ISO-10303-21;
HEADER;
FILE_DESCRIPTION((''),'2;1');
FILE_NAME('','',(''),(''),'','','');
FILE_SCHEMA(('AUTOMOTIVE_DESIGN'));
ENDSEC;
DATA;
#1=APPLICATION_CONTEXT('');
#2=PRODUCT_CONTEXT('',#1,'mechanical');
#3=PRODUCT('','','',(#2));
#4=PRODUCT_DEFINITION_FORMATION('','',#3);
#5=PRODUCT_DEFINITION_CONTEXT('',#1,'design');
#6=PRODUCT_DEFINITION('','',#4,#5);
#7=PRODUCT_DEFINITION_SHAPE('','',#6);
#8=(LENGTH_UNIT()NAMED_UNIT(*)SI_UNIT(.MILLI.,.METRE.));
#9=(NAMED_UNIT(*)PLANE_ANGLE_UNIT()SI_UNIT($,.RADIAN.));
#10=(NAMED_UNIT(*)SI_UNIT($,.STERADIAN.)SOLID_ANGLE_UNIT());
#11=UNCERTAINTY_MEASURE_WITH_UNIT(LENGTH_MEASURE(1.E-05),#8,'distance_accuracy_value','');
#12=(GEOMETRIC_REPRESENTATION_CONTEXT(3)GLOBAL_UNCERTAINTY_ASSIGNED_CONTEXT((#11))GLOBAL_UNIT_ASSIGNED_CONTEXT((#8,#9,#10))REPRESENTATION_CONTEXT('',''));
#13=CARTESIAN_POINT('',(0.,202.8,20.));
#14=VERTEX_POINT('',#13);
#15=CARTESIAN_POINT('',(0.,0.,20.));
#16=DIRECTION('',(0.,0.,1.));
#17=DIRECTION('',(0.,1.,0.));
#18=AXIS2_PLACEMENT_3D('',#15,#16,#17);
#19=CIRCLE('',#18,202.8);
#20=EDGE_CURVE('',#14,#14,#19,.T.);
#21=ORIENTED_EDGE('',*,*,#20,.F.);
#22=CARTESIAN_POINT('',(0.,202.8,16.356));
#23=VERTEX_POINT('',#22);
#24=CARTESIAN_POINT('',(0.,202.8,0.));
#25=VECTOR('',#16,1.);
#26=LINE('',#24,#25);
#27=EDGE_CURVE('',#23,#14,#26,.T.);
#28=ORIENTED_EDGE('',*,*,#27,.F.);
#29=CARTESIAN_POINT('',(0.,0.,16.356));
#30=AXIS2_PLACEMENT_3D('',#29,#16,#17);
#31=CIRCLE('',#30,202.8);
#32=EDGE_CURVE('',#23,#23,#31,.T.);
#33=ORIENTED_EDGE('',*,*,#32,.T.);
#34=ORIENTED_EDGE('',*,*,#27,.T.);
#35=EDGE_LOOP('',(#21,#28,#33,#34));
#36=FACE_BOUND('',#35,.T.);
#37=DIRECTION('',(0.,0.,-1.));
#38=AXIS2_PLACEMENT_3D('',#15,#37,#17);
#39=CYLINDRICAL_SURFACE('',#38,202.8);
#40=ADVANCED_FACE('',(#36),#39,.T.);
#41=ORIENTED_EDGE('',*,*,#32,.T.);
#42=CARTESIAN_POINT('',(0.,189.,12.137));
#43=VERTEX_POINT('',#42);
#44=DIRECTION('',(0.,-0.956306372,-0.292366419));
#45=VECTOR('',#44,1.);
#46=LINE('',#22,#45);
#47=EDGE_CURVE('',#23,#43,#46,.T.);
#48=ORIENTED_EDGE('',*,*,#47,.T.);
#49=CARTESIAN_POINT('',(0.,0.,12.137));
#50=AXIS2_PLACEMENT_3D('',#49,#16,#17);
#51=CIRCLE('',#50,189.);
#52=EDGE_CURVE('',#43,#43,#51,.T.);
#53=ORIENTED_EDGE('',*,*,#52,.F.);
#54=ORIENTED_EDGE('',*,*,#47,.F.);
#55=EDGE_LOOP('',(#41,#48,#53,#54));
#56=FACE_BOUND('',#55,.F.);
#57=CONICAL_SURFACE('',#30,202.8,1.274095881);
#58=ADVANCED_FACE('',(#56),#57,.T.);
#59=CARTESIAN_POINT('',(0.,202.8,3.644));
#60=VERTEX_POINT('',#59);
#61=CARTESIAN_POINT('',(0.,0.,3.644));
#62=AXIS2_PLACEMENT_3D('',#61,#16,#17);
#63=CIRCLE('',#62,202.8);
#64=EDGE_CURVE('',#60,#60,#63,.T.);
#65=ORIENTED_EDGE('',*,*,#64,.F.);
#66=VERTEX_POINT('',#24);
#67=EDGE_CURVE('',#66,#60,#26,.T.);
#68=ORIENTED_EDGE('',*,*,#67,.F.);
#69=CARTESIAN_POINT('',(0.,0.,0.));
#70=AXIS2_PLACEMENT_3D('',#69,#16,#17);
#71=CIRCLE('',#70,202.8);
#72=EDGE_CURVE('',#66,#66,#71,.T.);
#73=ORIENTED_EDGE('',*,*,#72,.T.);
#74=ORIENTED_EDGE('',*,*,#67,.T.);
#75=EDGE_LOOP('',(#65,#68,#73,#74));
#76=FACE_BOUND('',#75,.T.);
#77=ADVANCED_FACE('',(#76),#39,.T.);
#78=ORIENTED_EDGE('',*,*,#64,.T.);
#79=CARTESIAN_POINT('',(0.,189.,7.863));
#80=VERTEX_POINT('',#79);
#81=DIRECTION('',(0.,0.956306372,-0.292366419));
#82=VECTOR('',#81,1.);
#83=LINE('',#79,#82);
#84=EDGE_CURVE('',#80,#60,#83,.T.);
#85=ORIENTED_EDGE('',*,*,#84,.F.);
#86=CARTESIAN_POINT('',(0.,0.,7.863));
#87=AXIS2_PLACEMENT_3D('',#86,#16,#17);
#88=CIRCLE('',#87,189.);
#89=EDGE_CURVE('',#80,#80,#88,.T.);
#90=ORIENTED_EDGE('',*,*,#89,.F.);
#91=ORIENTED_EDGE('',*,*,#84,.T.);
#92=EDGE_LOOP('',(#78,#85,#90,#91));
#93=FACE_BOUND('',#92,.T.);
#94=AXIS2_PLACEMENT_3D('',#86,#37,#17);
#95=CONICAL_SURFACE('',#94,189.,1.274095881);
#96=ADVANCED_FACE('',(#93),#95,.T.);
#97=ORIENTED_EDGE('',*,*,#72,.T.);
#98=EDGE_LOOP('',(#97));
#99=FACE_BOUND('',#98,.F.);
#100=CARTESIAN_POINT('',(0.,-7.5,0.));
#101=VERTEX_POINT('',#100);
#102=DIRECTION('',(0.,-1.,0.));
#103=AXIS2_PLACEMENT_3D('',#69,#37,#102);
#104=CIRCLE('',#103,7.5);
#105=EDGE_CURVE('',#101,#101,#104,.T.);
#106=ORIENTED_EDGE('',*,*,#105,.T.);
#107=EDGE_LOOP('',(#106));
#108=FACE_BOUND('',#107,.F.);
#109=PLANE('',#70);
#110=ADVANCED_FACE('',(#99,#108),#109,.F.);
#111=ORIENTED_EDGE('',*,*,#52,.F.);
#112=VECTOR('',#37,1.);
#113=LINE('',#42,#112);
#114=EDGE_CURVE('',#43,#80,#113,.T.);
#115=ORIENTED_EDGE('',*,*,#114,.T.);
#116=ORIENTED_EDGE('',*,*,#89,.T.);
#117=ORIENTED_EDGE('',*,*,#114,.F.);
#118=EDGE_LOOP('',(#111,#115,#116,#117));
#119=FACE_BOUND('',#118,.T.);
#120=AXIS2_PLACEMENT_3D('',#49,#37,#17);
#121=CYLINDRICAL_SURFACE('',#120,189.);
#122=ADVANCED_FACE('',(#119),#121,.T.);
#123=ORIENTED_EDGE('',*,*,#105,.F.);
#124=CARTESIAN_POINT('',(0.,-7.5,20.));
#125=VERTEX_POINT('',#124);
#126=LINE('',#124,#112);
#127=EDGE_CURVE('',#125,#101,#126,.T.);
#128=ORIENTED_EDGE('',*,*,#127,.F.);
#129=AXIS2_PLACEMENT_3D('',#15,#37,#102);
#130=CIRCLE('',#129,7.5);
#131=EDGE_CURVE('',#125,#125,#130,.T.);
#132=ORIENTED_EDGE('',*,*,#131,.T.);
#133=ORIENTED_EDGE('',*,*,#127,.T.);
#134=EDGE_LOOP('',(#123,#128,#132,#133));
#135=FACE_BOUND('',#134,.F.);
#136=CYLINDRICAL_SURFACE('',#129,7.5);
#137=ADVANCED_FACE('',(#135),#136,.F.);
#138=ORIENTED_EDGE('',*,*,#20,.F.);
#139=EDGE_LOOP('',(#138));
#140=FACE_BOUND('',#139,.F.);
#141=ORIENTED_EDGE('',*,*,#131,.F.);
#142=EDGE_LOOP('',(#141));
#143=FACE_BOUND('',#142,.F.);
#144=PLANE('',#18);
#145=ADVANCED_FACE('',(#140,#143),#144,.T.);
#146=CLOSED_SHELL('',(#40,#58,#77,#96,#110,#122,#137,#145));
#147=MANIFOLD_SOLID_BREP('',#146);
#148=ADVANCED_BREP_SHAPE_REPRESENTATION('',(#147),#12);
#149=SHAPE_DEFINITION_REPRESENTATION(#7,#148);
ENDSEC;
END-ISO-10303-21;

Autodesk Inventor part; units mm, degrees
ref_plane "YZ Plane" through (0, 0, 0) normal (1, 0, 0) x (0, 1, 0)
ref_plane "XZ Plane" through (0, 0, 0) normal (0, 1, 0) x (-1, 0, 0)
sketch "Boceto principal" plane through (0, 0, 0) normal (1, 0, 0) x (0, 1, 0)
  line L0 (0, 20) -> (202.8, 20)
  line L1 (202.8, 20) -> (202.8, 16.356)
  line L2 (202.8, 16.356) -> (189, 12.137)
  line L3 (189, 12.137) -> (189, 7.863)
  line L4 (189, 7.863) -> (202.8, 3.644)
  line L5 (202.8, 3.644) -> (202.8, 0)
  line L6 (202.8, 0) -> (0, 0)
  line L7 (200, 15.5) -> (200, 4.5) construction
  line L8 (189, 10) -> (200, 10) construction
  line L9 (202.8, 16.356) -> (202.8, 3.644)
  line L10 (0, -4) -> (0, 24) projected
  line L11 (0, 0) -> (0, 20)
  dimension "d0" = 11
  dimension "d1" = 34
  dimension "d2" = 2.8
  dimension "d6" = 20
  dimension "d21" = 400
  dimension "d25" = 13.8
  dimension "d27" = 10
ref_plane "Plano de correa" through (0, 189, 10) normal (0, 0, 1) x (1, 0, 0)
revolve "Cuerpo" add sketch "Boceto principal" angle 360 about axis through (0, 0, -10) along (0, 0, 1)
revolve "Para ranuras" cut sketch "Boceto principal" angle 360 about axis through (0, 0, -10) along (0, 0, 1) contours L9 L4 L3 L2
fillet "Empalme externo" [suppressed]
fillet "Empalme interno" [suppressed]
pattern_of_one "Patrón para ranuras"
sketch "Boceto2" plane through (0, 0, 20) normal (0, 0, 1) x (1, 0, 0)
  point P0 (0, 0)
  point P1 (0, 0)
hole "Agujero1" at (0, 0, 20) direction (0, 0, -1) diameter 15 end through all
equation "\"d0\" = da_Bw"
equation "\"d1\" = da_Alfa"
equation "\"d2\" = da_c"
equation "\"d21\" = da_Dw"
equation "\"d25\" = da_Hd"
equation "\"d27\" = da_Se"
equation "\"da_r1\" = 0"
equation "\"da_r2\" = 0"
equation "\"d18\" = da_Sg"
equation "\"da_Bw\" = 11"
equation "\"da_Alfa\" = 34deg"
equation "\"da_c\" = 2.8"
equation "\"da_Dw\" = 400"
equation "\"da_Hd\" = 13.8"
equation "\"da_Se\" = 10"
equation "\"da_Sg\" = 15"
properties part number "Polea ranurada2" material "Steel"
